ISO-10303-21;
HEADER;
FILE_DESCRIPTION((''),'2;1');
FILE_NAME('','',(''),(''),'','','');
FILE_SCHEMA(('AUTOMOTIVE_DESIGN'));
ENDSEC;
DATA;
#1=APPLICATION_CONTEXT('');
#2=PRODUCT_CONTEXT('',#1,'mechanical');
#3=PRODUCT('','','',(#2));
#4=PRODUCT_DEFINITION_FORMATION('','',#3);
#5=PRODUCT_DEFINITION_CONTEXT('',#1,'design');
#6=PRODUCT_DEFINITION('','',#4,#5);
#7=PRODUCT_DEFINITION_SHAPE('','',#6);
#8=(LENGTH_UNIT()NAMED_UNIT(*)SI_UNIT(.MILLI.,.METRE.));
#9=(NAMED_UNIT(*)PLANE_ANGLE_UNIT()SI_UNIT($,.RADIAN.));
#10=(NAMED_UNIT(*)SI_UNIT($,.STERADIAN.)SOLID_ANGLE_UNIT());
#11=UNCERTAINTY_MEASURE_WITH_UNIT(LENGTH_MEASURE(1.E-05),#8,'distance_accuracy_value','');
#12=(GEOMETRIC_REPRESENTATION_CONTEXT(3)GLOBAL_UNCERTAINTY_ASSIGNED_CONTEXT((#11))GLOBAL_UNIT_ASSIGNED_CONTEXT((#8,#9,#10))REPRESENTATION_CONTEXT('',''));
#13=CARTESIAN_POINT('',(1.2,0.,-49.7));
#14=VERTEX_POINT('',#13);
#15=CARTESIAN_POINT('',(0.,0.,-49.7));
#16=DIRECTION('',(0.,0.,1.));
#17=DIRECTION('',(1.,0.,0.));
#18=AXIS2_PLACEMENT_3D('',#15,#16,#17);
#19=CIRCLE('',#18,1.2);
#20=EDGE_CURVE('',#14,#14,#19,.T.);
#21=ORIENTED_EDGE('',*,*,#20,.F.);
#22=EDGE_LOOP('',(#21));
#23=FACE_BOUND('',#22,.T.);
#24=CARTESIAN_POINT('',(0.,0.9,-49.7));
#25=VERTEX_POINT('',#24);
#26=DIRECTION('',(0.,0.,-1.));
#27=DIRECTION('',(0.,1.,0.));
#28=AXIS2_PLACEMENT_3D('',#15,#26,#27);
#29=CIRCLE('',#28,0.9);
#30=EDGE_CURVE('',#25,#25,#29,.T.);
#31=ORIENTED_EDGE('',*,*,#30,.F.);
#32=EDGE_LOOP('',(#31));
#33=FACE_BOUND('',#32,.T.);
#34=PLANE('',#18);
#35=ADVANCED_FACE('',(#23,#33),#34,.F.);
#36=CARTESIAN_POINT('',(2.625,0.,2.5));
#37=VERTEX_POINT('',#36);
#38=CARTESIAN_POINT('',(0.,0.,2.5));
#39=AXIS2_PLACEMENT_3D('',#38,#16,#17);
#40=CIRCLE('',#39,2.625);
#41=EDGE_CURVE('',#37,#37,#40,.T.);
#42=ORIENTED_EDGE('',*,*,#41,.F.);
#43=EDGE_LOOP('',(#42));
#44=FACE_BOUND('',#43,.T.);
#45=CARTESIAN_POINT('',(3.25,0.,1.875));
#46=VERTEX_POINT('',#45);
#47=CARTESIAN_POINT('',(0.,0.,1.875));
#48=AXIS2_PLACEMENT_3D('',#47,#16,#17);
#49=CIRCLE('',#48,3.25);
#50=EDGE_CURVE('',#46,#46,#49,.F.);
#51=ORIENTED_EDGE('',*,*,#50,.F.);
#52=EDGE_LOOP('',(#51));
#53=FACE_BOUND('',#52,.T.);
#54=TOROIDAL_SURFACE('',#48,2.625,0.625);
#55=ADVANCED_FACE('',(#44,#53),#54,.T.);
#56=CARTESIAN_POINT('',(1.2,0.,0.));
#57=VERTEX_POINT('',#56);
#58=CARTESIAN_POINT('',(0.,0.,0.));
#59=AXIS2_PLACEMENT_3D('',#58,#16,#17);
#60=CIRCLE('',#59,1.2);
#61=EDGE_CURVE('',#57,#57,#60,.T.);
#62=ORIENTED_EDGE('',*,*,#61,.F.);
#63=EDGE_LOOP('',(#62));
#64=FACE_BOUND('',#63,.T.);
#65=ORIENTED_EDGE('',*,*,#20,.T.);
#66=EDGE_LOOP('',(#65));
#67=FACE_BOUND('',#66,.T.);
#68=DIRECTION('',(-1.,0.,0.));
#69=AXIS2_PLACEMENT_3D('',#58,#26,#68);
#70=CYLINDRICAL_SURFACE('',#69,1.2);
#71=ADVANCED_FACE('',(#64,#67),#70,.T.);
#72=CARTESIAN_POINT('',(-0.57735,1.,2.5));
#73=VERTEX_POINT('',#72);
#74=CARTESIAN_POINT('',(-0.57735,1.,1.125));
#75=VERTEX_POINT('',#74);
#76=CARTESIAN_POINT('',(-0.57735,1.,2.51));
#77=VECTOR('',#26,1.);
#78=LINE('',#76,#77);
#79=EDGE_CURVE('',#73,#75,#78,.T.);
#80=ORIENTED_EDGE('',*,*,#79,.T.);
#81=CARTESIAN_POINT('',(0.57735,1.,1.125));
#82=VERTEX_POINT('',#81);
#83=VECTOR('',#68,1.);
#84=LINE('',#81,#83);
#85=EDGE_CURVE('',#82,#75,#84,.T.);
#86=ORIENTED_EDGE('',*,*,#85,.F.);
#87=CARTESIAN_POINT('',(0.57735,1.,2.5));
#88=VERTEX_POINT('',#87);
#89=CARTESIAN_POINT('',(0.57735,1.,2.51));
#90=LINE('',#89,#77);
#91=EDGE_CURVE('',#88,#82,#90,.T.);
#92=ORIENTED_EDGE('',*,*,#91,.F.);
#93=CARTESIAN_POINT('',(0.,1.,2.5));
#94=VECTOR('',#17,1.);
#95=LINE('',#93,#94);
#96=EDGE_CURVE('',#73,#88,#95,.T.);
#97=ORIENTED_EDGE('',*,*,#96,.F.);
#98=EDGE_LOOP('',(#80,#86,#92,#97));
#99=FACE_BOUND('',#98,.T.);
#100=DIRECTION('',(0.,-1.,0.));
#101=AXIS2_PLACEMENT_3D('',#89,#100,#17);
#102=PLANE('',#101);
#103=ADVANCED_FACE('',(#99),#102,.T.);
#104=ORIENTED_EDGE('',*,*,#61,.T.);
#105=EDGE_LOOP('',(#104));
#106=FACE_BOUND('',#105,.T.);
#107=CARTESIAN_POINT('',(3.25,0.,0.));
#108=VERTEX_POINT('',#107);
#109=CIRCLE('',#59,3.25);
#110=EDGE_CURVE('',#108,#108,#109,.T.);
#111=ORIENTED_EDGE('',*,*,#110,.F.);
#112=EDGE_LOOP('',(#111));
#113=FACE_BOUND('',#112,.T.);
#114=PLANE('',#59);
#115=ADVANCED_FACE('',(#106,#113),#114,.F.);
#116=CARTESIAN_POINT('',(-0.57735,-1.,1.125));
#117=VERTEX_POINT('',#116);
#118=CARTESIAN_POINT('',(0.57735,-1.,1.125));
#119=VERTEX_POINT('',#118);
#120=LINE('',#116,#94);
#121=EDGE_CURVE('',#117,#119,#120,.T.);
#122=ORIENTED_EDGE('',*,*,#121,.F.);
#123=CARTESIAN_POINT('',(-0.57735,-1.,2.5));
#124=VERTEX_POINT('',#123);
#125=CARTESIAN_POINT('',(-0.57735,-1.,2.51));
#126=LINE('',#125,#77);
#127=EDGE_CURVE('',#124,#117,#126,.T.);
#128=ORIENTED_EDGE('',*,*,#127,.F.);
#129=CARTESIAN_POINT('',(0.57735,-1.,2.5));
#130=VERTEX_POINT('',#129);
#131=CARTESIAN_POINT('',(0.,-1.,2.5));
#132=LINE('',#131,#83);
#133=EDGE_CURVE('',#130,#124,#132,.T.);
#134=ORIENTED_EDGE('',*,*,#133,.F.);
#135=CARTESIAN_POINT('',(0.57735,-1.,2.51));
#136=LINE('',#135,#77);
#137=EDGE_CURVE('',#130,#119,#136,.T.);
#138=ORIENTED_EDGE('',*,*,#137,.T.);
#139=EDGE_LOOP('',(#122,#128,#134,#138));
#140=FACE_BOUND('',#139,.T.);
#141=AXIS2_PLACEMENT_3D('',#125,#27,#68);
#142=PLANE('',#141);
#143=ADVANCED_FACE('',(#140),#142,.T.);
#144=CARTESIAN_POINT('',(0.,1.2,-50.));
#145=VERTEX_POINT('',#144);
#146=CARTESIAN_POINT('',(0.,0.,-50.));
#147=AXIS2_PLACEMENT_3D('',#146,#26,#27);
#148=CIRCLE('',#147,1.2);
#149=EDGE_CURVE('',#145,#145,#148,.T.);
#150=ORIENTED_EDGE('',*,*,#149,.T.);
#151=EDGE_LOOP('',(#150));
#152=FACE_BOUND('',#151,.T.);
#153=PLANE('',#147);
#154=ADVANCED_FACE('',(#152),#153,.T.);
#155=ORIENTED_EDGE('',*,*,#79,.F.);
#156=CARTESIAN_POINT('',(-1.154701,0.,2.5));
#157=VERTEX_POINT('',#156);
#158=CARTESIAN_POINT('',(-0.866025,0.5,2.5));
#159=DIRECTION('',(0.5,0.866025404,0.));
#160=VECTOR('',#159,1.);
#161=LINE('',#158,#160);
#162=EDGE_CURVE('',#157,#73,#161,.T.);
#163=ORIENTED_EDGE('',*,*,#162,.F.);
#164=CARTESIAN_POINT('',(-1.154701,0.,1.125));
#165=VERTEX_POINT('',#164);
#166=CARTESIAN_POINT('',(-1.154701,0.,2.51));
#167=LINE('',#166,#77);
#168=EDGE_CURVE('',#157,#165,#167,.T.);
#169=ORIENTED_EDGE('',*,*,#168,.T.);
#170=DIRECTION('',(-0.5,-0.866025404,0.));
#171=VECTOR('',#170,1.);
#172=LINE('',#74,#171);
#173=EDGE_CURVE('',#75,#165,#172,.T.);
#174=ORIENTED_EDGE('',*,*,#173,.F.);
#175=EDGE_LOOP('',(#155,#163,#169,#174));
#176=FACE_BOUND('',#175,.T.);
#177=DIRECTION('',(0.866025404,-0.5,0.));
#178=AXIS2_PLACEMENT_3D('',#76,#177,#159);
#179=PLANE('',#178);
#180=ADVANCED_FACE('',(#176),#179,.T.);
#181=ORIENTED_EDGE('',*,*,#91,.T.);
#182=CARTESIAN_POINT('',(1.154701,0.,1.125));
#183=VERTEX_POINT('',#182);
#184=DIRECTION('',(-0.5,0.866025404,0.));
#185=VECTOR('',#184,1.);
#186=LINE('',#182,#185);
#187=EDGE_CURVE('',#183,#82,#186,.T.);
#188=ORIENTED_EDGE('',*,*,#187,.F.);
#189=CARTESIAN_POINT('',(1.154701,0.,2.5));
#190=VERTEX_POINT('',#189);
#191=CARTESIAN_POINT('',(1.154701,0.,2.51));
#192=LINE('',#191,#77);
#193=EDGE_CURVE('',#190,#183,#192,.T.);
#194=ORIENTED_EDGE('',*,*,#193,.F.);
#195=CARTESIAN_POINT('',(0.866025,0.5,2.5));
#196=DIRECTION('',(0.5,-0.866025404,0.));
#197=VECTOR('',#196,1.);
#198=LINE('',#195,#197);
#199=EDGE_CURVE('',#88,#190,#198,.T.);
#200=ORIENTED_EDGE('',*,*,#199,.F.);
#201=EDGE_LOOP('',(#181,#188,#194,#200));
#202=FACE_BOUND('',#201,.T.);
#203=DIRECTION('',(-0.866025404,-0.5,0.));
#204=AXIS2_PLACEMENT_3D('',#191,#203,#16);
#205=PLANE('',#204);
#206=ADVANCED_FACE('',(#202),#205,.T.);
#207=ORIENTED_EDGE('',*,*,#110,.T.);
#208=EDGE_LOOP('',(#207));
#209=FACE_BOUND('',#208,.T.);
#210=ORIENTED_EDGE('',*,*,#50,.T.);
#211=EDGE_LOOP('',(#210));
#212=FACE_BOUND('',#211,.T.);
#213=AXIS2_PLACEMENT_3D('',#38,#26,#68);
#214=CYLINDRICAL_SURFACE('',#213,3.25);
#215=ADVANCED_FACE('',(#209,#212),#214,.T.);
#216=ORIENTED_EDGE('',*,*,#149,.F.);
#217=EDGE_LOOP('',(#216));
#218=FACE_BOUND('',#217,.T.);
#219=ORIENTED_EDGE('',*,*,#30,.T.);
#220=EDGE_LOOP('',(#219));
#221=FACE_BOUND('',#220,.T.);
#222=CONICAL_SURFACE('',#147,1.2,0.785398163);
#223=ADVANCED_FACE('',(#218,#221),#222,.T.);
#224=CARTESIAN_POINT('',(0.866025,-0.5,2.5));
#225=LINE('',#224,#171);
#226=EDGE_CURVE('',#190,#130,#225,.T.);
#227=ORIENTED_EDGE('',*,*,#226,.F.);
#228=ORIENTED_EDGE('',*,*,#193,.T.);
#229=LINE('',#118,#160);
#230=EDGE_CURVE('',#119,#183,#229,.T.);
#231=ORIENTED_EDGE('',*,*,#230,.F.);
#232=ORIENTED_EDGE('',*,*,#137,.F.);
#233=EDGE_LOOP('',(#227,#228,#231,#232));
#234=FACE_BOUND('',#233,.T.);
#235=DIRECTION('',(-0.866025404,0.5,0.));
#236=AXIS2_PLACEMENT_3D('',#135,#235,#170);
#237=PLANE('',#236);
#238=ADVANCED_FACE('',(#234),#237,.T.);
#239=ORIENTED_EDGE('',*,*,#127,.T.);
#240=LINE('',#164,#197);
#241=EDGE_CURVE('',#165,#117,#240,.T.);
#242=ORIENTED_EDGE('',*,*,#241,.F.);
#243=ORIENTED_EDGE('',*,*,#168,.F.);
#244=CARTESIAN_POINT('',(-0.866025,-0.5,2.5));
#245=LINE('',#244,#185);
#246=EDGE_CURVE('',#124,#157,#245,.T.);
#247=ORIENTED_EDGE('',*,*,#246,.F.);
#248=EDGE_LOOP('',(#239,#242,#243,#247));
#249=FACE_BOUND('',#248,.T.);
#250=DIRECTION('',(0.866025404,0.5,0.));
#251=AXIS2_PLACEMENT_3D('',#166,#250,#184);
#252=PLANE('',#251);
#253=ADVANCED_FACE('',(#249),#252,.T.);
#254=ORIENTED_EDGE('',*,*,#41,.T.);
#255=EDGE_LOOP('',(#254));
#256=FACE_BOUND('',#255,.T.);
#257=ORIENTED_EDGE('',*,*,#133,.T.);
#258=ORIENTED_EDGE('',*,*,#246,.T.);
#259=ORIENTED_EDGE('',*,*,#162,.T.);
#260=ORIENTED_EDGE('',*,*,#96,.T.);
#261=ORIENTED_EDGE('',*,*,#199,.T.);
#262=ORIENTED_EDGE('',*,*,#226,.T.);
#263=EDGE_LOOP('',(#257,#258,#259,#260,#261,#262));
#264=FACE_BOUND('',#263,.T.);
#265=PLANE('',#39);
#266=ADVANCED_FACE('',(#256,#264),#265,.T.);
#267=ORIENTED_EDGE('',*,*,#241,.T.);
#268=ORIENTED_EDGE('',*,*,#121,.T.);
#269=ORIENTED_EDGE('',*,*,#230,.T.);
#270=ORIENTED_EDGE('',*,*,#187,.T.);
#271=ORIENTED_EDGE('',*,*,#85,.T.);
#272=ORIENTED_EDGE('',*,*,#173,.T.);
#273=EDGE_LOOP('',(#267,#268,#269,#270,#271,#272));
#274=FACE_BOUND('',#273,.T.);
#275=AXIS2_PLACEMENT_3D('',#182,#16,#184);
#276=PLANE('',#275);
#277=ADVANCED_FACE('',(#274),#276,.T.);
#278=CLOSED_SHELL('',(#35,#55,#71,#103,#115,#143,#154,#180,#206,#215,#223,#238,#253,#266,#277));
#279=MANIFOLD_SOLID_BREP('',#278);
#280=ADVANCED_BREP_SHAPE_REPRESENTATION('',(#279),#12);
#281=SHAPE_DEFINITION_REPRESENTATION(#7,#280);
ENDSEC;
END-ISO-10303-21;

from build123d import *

# Parameters (mm, degrees)
F_0120_CYLINDER_SKETCH_R    = 3.25
F_0120_CYLINDER_DEPTH       = 2.5
F_0121_FILLET_R             = 0.625
F_0122_EXTRUDE_DEPTH        = 1.385
F_0122_EXTRUDE_ROTATE_ANGLE = 120
F_0125_CYLINDER_SKETCH_R    = 1.2
F_0125_CYLINDER_DEPTH       = 49.7
F_0126_CONE_ROTATE_ANGLE    = 90


with BuildPart() as part:
    # 0120_cylinder_Sketch → 0120_cylinder (new body)
    with BuildSketch(Plane.XY):
        Circle(F_0120_CYLINDER_SKETCH_R)
    extrude(amount=F_0120_CYLINDER_DEPTH)

    # 0121_fillet
    f_0121_fillet_edges = [part.edges().sort_by_distance(p)[0] for p in [
        (-3.25, 0, 2.5),
    ]]
    fillet(f_0121_fillet_edges, radius=F_0121_FILLET_R)


with BuildPart() as body_2:
    # 0122_extrude_Sketch → 0122_extrude (new body)
    with BuildSketch(Plane.XY):
        Polygon((0, 0), (1.154700538, 0), (1.732050808, 1), (1.154700538, 2), (0, 2), (-0.577350269, 1), align=None)
    extrude(amount=F_0122_EXTRUDE_DEPTH)


with BuildPart() as body_2_1:
    # 0122_extrude_Rotate: read off the stored shape, not the designer's step
    # 0122_extrude_Rotate: moved
    add(body_2.part.rotate(Axis((0, 0, 0), (0, 0, 1)), F_0122_EXTRUDE_ROTATE_ANGLE))


with BuildPart() as body_2_2:
    # 0122_extrude_Translate: moved
    add(body_2_1.part.moved(Location((1.154700538, 0, 1.125))))


with BuildPart() as part_1:
    add(part.part)

    # 0124_sub: cut body 2
    add(body_2_2.part, mode=Mode.SUBTRACT)


with BuildPart() as body_2_2_1:
    # 0125_cylinder_Sketch → 0125_cylinder (new body)
    with BuildSketch(Plane.XY):
        Circle(F_0125_CYLINDER_SKETCH_R)
    extrude(amount=F_0125_CYLINDER_DEPTH)


with BuildPart() as body_2_2_2:
    # 0125_cylinder_Translate: moved
    add(body_2_2_1.part.moved(Location((0, 0, -49.7))))


with BuildPart() as body_3:
    # 0126_cone_Sketch → 0126_cone (revolve)
    with BuildSketch(Plane.XY, mode=Mode.PRIVATE) as f_0126_cone_sk:
        Polygon((0, 0), (1.2, 0), (0.9, 0.3), (0, 0.3), align=None)
    revolve(f_0126_cone_sk.sketch.rotate(Axis((0, -100, 0), (0, 1, 0)), 90), axis=Axis((0, -100, 0), (0, 1, 0)))


with BuildPart() as body_3_1:
    # 0126_cone_Rotate: moved
    add(body_3.part.rotate(Axis((0, 0, 0), (1, 0, 0)), F_0126_CONE_ROTATE_ANGLE))


with BuildPart() as body_3_2:
    # 0126_cone_Translate: moved
    add(body_3_1.part.moved(Location((0, 0, -50))))


with BuildPart() as body_2_2_3:
    add(body_2_2_2.part)

    # 0128_add: union body 3
    add(body_3_2.part)


with BuildPart() as part_2:
    add(part_1.part)

    # 0129_add: union body 2 2
    add(body_2_2_3.part)


solid = part_2.part
